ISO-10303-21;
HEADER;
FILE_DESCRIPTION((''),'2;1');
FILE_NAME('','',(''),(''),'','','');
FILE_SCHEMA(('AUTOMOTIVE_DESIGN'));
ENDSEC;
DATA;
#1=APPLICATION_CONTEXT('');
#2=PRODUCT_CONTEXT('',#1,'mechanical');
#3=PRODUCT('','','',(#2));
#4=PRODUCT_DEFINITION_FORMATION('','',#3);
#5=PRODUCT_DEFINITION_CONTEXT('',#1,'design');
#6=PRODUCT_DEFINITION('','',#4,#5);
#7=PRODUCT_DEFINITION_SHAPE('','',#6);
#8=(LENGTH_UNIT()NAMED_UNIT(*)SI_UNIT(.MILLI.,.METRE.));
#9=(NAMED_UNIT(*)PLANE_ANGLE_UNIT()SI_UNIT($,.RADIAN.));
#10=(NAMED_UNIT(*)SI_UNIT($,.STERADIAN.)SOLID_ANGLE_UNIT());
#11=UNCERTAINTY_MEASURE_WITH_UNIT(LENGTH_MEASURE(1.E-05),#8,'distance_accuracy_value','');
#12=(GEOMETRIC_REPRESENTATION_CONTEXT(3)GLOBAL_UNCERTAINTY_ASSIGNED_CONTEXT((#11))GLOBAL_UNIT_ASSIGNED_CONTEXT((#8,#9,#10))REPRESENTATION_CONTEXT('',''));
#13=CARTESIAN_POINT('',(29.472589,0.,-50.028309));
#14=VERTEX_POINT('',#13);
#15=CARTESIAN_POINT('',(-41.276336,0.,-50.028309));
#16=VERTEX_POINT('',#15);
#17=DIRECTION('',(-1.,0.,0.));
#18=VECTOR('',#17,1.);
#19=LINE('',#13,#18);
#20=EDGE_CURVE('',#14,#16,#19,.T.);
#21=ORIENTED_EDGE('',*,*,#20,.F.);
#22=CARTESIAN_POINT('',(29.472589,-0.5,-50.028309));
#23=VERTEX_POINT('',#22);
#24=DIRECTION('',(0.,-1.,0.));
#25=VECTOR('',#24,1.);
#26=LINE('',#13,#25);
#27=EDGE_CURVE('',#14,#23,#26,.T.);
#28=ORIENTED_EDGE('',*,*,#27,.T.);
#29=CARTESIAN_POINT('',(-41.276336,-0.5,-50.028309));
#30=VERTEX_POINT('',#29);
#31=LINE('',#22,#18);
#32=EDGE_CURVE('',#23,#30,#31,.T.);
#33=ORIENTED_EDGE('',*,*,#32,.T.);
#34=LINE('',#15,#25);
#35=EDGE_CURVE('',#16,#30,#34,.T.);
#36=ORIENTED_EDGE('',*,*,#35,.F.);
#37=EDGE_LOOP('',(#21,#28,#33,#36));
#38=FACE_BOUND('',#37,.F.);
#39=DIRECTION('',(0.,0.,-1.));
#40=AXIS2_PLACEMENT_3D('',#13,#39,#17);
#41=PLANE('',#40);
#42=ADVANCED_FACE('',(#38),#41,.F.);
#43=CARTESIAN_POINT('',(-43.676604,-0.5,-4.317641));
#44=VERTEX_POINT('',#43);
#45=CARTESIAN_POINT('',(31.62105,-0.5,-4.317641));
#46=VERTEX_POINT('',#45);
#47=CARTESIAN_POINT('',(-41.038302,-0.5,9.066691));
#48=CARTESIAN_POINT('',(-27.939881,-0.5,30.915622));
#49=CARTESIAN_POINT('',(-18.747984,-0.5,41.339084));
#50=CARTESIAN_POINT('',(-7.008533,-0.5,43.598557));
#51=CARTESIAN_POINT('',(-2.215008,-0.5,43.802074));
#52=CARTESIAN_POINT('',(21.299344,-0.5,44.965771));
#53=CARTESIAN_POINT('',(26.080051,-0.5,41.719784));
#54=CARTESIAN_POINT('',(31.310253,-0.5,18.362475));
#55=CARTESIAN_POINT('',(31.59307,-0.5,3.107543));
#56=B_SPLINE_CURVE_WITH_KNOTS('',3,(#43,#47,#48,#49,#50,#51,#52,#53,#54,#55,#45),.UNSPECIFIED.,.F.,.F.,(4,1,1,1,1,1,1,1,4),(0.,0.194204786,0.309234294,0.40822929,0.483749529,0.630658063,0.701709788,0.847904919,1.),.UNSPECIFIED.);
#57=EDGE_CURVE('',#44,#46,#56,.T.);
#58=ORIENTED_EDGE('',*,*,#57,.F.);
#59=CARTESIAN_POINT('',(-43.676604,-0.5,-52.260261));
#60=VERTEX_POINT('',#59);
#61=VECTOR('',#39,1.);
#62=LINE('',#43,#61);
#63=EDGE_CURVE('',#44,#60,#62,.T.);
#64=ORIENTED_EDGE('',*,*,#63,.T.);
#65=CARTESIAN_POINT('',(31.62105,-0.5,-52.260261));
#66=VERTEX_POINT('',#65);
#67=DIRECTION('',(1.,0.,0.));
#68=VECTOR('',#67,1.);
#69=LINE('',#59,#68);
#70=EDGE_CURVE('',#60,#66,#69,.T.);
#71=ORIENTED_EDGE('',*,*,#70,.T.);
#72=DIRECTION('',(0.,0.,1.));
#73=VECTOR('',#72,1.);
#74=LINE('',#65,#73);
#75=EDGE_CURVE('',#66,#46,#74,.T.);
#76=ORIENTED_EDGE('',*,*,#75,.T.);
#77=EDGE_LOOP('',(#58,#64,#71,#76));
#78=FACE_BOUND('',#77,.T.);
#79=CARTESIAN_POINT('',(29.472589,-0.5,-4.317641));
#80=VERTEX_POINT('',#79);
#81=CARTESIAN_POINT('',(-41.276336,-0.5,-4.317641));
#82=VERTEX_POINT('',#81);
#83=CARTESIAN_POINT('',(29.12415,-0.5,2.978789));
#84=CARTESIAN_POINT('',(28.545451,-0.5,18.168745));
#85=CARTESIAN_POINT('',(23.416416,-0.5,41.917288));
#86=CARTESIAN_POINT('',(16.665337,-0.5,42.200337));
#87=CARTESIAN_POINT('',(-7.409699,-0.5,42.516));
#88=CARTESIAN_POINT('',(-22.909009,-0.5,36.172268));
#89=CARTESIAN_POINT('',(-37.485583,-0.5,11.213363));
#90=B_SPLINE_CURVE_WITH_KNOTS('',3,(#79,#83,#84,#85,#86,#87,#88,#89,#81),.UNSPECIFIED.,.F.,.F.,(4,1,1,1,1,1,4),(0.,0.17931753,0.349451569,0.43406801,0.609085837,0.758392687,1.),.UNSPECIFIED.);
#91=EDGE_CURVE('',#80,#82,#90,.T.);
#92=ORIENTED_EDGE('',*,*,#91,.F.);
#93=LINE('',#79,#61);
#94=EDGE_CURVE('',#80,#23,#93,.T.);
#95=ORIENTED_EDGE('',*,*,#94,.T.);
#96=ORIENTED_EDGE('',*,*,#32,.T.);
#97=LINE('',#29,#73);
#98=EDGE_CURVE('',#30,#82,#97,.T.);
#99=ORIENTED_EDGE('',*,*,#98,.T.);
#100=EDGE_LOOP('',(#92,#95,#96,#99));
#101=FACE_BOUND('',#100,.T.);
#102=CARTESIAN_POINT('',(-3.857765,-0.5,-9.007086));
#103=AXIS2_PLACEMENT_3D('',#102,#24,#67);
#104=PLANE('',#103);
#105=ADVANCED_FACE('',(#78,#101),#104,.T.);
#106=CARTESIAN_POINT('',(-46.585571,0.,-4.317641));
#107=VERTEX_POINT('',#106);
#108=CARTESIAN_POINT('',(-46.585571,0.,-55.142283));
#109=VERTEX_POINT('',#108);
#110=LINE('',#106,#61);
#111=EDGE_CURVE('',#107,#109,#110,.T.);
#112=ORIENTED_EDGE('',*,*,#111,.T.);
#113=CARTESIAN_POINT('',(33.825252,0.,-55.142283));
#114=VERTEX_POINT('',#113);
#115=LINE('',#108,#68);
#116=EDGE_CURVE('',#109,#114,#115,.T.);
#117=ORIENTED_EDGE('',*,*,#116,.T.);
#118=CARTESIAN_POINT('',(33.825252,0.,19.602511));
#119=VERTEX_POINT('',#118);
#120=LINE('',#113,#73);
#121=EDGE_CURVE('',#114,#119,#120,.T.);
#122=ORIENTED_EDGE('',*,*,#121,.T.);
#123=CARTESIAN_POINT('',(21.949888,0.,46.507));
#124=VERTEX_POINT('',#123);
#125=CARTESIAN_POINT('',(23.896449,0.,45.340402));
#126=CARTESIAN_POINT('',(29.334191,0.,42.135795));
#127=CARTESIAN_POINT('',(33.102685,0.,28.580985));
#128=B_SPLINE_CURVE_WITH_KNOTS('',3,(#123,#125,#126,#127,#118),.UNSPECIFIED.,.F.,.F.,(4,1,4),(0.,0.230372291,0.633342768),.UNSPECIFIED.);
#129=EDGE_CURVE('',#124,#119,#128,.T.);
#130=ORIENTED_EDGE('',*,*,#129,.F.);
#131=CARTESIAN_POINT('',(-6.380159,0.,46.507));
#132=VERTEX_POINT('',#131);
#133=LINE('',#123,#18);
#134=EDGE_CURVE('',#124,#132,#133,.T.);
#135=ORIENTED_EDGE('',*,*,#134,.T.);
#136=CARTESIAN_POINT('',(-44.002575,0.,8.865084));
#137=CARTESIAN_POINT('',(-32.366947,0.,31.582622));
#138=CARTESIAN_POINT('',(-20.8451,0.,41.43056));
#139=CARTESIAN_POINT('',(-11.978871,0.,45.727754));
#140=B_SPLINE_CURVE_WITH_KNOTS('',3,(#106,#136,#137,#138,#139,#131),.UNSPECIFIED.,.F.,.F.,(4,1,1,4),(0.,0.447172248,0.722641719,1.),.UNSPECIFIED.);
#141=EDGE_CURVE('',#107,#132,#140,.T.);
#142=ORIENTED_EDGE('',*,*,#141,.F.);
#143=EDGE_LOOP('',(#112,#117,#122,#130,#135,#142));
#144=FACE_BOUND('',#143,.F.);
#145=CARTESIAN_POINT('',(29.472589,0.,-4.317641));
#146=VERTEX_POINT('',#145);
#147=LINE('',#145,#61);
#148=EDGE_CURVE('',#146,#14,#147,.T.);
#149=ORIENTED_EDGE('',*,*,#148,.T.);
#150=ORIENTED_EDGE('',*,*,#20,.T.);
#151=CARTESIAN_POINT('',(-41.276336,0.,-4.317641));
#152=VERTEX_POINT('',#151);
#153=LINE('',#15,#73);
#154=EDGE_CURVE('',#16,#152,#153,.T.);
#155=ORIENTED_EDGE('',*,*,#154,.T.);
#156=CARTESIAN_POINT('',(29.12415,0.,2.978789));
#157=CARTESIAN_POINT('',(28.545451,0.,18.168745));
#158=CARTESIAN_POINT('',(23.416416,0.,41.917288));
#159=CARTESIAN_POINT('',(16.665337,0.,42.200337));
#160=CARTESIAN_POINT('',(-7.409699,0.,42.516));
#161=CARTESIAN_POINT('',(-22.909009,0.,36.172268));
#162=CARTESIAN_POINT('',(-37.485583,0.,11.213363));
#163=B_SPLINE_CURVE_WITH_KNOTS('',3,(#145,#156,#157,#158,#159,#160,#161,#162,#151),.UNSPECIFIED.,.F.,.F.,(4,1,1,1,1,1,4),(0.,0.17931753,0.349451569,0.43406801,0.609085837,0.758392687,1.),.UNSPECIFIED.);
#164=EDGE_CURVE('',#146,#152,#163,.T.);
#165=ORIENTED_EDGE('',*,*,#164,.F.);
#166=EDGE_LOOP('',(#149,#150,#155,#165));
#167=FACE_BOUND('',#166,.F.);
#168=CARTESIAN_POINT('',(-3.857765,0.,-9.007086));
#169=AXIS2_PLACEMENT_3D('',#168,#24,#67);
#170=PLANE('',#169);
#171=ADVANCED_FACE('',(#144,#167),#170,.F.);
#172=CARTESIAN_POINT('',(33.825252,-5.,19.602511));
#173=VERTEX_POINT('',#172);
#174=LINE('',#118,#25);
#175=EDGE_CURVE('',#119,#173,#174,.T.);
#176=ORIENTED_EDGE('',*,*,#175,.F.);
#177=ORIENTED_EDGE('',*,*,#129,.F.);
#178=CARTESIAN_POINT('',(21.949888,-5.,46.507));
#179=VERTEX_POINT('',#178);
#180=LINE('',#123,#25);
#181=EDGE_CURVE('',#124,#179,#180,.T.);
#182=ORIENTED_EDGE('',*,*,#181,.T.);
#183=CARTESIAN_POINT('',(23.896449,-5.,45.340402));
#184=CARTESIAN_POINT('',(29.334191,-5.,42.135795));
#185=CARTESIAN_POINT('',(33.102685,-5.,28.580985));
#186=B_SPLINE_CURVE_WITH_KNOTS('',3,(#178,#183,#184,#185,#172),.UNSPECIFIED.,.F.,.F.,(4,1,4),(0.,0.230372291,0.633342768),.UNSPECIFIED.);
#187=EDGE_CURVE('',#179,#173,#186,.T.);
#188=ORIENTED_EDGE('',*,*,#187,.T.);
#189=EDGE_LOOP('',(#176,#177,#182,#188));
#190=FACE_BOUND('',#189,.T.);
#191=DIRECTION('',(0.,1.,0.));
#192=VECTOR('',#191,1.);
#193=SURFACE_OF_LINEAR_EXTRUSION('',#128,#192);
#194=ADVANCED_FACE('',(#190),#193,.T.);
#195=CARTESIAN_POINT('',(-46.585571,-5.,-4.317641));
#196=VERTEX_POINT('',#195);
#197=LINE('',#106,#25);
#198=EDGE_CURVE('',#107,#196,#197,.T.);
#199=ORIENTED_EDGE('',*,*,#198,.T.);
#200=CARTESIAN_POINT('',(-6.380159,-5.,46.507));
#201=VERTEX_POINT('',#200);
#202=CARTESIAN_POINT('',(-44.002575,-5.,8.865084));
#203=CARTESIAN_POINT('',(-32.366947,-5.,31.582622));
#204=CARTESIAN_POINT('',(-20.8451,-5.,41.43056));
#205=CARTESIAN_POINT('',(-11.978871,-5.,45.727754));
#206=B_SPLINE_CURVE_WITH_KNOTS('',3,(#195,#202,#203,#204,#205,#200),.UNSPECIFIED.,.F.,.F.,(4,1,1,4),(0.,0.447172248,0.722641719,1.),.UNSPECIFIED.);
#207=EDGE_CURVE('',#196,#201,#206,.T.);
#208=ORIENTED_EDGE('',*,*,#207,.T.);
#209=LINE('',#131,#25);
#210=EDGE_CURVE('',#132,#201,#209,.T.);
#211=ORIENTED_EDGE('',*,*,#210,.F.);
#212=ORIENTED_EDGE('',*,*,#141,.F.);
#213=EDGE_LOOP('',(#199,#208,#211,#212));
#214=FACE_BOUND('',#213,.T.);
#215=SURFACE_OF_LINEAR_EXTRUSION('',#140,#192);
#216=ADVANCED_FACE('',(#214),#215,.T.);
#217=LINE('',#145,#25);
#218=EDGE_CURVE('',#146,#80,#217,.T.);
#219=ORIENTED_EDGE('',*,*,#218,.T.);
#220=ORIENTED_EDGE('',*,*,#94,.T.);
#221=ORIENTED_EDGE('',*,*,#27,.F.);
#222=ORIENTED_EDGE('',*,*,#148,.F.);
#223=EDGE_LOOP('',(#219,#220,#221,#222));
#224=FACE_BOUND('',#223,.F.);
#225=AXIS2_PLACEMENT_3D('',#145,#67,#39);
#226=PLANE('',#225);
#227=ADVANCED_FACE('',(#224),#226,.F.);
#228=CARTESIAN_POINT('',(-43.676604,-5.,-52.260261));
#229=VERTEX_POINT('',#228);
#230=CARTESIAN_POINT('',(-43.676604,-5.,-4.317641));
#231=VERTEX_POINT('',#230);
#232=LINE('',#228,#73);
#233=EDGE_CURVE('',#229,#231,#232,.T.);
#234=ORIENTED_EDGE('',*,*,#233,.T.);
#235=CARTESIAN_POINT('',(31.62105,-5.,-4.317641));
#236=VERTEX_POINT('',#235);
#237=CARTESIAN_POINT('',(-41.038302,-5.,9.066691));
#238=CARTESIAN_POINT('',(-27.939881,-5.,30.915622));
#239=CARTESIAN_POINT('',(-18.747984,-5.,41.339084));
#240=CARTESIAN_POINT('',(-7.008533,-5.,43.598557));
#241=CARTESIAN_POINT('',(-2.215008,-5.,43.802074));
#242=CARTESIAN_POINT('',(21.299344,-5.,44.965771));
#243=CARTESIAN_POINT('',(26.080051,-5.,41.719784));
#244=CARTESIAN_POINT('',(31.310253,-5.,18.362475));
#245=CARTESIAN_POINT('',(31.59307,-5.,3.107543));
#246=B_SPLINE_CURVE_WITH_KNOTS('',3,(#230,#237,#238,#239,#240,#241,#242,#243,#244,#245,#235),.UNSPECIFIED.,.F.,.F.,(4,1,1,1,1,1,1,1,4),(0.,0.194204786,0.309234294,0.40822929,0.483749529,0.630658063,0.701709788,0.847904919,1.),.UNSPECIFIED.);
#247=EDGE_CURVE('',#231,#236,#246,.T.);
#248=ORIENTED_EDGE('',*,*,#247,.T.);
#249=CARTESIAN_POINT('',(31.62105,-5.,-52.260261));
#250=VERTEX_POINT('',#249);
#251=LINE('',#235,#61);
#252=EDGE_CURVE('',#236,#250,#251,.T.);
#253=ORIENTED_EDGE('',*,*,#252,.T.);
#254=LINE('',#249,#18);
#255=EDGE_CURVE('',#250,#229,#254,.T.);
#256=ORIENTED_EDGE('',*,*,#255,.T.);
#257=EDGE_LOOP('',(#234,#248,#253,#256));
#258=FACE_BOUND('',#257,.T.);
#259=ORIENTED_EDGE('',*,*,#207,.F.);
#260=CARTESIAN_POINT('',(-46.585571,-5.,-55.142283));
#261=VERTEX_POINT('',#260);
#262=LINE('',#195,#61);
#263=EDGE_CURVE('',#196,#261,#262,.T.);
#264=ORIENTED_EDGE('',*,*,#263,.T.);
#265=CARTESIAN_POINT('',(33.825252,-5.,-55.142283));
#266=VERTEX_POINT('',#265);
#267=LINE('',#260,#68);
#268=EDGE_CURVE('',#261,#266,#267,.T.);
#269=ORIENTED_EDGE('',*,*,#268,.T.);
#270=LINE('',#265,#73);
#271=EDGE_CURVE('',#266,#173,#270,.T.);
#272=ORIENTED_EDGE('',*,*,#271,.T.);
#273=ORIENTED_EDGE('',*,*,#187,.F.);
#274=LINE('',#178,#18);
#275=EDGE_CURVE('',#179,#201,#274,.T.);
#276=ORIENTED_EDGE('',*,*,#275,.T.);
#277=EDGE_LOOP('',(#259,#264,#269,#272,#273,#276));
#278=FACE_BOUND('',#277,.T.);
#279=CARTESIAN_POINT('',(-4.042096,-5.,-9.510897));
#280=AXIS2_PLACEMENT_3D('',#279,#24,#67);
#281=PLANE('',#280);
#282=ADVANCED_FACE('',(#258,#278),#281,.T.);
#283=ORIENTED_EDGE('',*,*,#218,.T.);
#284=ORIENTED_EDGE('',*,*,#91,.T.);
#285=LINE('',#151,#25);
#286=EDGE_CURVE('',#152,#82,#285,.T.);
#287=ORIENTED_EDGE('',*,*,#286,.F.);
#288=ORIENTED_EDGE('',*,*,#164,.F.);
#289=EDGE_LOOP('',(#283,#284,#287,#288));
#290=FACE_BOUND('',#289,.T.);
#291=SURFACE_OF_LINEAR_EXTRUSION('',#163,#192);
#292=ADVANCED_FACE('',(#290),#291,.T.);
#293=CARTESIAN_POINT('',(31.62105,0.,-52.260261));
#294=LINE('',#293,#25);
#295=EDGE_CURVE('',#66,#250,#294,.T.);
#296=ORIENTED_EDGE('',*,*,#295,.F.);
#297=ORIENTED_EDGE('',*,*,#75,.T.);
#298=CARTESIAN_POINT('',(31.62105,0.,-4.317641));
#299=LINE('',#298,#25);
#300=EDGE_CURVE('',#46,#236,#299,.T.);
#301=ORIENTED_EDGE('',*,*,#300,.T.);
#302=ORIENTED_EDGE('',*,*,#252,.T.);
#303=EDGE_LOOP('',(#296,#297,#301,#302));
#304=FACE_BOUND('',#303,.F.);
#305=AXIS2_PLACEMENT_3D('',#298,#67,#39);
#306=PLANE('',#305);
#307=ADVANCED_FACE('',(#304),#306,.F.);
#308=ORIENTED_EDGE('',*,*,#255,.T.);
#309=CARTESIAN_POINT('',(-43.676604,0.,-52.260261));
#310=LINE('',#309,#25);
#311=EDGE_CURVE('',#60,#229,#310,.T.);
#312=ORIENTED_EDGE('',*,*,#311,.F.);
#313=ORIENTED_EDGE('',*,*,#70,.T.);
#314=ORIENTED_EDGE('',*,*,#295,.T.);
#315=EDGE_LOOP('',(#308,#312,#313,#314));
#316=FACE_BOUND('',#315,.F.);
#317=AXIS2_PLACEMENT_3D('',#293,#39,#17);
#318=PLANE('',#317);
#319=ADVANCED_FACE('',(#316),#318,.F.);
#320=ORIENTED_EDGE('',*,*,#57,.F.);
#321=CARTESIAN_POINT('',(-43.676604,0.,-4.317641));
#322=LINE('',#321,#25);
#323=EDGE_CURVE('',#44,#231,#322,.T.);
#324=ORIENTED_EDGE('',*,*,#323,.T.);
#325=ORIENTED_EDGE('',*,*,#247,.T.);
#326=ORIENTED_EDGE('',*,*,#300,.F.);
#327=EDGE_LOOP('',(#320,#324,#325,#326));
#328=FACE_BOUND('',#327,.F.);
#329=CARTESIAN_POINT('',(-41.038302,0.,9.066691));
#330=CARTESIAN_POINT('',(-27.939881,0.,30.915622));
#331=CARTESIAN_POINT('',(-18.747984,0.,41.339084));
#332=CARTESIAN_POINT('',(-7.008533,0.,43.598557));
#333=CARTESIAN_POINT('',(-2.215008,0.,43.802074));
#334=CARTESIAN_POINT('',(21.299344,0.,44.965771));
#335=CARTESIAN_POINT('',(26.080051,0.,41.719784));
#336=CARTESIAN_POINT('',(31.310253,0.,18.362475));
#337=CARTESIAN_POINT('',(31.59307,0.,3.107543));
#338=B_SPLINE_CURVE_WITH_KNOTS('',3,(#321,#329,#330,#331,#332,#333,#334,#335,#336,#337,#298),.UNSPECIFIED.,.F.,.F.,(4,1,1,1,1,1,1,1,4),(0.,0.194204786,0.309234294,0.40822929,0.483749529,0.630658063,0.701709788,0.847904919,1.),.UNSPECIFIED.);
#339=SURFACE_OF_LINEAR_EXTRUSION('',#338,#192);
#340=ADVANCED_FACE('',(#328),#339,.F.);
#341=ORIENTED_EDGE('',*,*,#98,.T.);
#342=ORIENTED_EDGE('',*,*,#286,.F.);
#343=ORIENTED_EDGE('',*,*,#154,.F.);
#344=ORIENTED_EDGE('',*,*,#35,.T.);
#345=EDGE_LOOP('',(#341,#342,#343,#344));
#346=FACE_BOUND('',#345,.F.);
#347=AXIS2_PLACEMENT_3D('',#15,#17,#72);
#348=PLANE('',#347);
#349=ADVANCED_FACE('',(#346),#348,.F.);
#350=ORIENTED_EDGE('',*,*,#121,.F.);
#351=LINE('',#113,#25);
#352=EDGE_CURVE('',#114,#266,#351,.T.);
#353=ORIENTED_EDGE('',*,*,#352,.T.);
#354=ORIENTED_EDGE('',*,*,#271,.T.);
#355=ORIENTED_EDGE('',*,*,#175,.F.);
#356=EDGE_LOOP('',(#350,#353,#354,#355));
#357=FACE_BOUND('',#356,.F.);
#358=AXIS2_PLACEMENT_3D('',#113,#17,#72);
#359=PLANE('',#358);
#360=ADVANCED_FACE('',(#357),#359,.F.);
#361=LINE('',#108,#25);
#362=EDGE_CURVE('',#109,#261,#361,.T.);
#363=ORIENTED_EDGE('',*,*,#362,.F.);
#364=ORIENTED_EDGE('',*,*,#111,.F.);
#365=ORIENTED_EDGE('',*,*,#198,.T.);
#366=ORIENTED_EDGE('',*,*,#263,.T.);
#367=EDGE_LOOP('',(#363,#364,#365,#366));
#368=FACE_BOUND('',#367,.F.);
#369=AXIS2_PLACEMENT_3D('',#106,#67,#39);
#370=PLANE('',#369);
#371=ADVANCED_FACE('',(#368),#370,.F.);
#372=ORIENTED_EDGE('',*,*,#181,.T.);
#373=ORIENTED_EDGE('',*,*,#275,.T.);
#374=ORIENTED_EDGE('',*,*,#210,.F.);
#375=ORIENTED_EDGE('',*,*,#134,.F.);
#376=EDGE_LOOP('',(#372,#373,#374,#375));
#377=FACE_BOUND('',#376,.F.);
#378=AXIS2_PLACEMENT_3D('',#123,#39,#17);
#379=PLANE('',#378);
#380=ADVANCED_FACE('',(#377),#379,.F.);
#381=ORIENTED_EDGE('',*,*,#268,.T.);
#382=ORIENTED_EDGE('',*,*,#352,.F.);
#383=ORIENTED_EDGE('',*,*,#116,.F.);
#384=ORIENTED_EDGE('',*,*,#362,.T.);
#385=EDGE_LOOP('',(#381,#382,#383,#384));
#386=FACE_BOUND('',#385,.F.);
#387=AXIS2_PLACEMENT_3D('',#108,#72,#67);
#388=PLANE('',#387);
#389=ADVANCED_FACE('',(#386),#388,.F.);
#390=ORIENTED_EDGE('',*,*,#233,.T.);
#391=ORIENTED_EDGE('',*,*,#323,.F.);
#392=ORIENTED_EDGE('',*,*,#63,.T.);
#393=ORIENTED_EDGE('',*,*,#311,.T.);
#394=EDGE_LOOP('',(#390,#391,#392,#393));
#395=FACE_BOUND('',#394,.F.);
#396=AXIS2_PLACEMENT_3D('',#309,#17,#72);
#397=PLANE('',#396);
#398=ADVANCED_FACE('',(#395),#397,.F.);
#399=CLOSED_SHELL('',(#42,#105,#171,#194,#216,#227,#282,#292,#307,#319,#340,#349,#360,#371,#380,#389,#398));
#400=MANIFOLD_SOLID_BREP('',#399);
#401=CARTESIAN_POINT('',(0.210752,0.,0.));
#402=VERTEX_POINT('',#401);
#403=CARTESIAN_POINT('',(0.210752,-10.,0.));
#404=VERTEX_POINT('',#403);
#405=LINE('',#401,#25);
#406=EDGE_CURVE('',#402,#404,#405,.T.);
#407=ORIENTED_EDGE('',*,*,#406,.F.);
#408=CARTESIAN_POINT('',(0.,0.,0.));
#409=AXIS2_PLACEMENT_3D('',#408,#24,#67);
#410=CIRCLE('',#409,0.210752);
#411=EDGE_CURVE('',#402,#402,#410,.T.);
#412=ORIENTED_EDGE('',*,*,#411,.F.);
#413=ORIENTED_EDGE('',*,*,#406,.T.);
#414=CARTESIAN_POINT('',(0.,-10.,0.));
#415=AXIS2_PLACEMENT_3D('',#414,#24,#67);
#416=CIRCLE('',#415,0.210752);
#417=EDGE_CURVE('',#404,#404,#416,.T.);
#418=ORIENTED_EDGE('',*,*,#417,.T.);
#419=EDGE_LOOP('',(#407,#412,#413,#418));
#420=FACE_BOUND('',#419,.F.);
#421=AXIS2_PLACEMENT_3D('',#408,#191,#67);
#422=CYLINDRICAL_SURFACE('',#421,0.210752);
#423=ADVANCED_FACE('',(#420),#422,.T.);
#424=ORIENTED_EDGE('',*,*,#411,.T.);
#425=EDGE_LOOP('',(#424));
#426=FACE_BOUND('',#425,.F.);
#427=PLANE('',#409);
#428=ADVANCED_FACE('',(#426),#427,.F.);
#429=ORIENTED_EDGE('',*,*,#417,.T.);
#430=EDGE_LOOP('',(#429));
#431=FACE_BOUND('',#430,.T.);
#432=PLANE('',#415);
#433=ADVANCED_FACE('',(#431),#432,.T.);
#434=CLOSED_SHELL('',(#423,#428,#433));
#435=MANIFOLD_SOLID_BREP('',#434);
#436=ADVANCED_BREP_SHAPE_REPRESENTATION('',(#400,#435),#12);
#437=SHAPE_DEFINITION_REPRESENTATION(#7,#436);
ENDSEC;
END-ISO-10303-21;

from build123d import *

# Parameters (mm, degrees)
F0_R     = 0.2107517129
F1_DEPTH = 10
F3_DEPTH = 5
F4_DEPTH = 0.5


with BuildPart() as f1:
    # F0 (on Front) → F1 (new body)
    with BuildSketch(Plane.XZ):
        Circle(F0_R)
    extrude(amount=F1_DEPTH)


with BuildPart() as f3:
    # F2 (on Front) → F3 (new body)
    with BuildSketch(Plane.XZ):
        with BuildLine():
            Line((21.9498877709, 46.5069999899), (-6.3801594079, 46.5069999899))
            add(Edge.make_bspline(
                [(-46.5855710208, -4.3176412582), (-44.0025745855, 8.8650835819), (-32.3669471438, 31.5826223404), (-20.8450996019, 41.430559805), (-11.9788710798, 45.7277535437), (-6.3801594079, 46.5069999899)],
                knots=[0, 0, 0, 0, 0.4471722481, 0.7226417186, 1, 1, 1, 1], degree=3))
            Line((-46.5855710208, -4.3176412582), (-46.5855710208, -55.1422825063))
            Line((-46.5855710208, -55.1422825063), (33.8252522051, -55.1422825063))
            Line((33.8252522051, -55.1422825063), (33.8252522051, 3.3716567512))
            add(Edge.make_bspline(
                [(33.8252522051, 3.4864664458), (33.8224510146, 3.4189701607), (33.823496077, 3.4012213221), (33.8252522051, 3.3716567512)],
                knots=[0.9714616128, 0.9714616128, 0.9714616128, 0.9714616128, 1, 1, 1, 1], degree=3))
            Line((33.8252522051, 3.4864664458), (33.8252522051, 19.6025110781))
            add(Edge.make_bspline(
                [(21.9498877709, 46.5069999899), (23.8964492564, 45.3404017708), (29.3341911452, 42.1357952335), (33.1026848595, 28.5809846581), (33.8252522051, 19.6025110781)],
                knots=[0, 0, 0, 0, 0.2303722913, 0.6333427683, 0.6333427683, 0.6333427683, 0.6333427683], degree=3))
        make_face()
        with BuildLine():
            Line((31.6210500896, -52.260261029), (-43.6766035855, -52.260261029))
            Line((-43.6766035855, -52.260261029), (-43.6766035855, -4.3176412582))
            add(Edge.make_bspline(
                [(-43.6766035855, -4.3176412582), (-41.0383021138, 9.0666906176), (-27.9398807539, 30.9156219348), (-18.7479844266, 41.3390835094), (-7.0085331076, 43.5985571671), (-2.215007715, 43.8020735184), (21.2993443911, 44.9657713637), (26.0800513958, 41.7197839808), (31.3102526714, 18.3624746495), (31.5930695379, 3.1075431018), (31.6210500896, -4.3176412582)],
                knots=[0, 0, 0, 0, 0.1942047864, 0.3092342936, 0.40822929, 0.4837495286, 0.6306580628, 0.7017097882, 0.8479049191, 1, 1, 1, 1], degree=3))
            Line((31.6210500896, -4.3176412582), (31.6210500896, -52.260261029))
        make_face(mode=Mode.SUBTRACT)
        with BuildLine():
            Line((33.8252522051, 3.3716567512), (33.8252522051, 3.4864664458))
            add(Edge.make_bspline(
                [(33.8252522051, 3.4864664458), (33.8224510146, 3.4189701607), (33.823496077, 3.4012213221), (33.8252522051, 3.3716567512)],
                knots=[0.9714616128, 0.9714616128, 0.9714616128, 0.9714616128, 1, 1, 1, 1], degree=3))
        make_face()
    extrude(amount=F3_DEPTH)

    # F2 (on Front) → F4 (join)
    with BuildSketch(Plane.XZ):
        with BuildLine():
            Line((-43.6766035855, -4.3176412582), (-43.6766035855, -52.260261029))
            Line((-43.6766035855, -52.260261029), (31.6210500896, -52.260261029))
            Line((31.6210500896, -52.260261029), (31.6210500896, -4.3176412582))
            add(Edge.make_bspline(
                [(-43.6766035855, -4.3176412582), (-41.0383021138, 9.0666906176), (-27.9398807539, 30.9156219348), (-18.7479844266, 41.3390835094), (-7.0085331076, 43.5985571671), (-2.215007715, 43.8020735184), (21.2993443911, 44.9657713637), (26.0800513958, 41.7197839808), (31.3102526714, 18.3624746495), (31.5930695379, 3.1075431018), (31.6210500896, -4.3176412582)],
                knots=[0, 0, 0, 0, 0.1942047864, 0.3092342936, 0.40822929, 0.4837495286, 0.6306580628, 0.7017097882, 0.8479049191, 1, 1, 1, 1], degree=3))
        make_face()
        with BuildLine():
            Line((29.4725894928, -50.028309226), (-41.2763357162, -50.028309226))
            Line((-41.2763357162, -50.028309226), (-41.2763357162, -4.3176412582))
            add(Edge.make_bspline(
                [(29.4725894928, -4.3176412582), (29.1241496967, 2.9787885737), (28.5454511929, 18.1687452905), (23.4164160844, 41.9172876242), (16.665337298, 42.2003372333), (-7.4096989865, 42.5160002908), (-22.9090094529, 36.1722681351), (-37.4855825891, 11.2133633357), (-41.2763357162, -4.3176412582)],
                knots=[0, 0, 0, 0, 0.1793175303, 0.3494515687, 0.4340680096, 0.6090858367, 0.7583926872, 1, 1, 1, 1], degree=3))
            Line((29.4725894928, -4.3176412582), (29.4725894928, -50.028309226))
        make_face(mode=Mode.SUBTRACT)
    extrude(amount=F4_DEPTH)


solid = Compound([f1.part, f3.part])
